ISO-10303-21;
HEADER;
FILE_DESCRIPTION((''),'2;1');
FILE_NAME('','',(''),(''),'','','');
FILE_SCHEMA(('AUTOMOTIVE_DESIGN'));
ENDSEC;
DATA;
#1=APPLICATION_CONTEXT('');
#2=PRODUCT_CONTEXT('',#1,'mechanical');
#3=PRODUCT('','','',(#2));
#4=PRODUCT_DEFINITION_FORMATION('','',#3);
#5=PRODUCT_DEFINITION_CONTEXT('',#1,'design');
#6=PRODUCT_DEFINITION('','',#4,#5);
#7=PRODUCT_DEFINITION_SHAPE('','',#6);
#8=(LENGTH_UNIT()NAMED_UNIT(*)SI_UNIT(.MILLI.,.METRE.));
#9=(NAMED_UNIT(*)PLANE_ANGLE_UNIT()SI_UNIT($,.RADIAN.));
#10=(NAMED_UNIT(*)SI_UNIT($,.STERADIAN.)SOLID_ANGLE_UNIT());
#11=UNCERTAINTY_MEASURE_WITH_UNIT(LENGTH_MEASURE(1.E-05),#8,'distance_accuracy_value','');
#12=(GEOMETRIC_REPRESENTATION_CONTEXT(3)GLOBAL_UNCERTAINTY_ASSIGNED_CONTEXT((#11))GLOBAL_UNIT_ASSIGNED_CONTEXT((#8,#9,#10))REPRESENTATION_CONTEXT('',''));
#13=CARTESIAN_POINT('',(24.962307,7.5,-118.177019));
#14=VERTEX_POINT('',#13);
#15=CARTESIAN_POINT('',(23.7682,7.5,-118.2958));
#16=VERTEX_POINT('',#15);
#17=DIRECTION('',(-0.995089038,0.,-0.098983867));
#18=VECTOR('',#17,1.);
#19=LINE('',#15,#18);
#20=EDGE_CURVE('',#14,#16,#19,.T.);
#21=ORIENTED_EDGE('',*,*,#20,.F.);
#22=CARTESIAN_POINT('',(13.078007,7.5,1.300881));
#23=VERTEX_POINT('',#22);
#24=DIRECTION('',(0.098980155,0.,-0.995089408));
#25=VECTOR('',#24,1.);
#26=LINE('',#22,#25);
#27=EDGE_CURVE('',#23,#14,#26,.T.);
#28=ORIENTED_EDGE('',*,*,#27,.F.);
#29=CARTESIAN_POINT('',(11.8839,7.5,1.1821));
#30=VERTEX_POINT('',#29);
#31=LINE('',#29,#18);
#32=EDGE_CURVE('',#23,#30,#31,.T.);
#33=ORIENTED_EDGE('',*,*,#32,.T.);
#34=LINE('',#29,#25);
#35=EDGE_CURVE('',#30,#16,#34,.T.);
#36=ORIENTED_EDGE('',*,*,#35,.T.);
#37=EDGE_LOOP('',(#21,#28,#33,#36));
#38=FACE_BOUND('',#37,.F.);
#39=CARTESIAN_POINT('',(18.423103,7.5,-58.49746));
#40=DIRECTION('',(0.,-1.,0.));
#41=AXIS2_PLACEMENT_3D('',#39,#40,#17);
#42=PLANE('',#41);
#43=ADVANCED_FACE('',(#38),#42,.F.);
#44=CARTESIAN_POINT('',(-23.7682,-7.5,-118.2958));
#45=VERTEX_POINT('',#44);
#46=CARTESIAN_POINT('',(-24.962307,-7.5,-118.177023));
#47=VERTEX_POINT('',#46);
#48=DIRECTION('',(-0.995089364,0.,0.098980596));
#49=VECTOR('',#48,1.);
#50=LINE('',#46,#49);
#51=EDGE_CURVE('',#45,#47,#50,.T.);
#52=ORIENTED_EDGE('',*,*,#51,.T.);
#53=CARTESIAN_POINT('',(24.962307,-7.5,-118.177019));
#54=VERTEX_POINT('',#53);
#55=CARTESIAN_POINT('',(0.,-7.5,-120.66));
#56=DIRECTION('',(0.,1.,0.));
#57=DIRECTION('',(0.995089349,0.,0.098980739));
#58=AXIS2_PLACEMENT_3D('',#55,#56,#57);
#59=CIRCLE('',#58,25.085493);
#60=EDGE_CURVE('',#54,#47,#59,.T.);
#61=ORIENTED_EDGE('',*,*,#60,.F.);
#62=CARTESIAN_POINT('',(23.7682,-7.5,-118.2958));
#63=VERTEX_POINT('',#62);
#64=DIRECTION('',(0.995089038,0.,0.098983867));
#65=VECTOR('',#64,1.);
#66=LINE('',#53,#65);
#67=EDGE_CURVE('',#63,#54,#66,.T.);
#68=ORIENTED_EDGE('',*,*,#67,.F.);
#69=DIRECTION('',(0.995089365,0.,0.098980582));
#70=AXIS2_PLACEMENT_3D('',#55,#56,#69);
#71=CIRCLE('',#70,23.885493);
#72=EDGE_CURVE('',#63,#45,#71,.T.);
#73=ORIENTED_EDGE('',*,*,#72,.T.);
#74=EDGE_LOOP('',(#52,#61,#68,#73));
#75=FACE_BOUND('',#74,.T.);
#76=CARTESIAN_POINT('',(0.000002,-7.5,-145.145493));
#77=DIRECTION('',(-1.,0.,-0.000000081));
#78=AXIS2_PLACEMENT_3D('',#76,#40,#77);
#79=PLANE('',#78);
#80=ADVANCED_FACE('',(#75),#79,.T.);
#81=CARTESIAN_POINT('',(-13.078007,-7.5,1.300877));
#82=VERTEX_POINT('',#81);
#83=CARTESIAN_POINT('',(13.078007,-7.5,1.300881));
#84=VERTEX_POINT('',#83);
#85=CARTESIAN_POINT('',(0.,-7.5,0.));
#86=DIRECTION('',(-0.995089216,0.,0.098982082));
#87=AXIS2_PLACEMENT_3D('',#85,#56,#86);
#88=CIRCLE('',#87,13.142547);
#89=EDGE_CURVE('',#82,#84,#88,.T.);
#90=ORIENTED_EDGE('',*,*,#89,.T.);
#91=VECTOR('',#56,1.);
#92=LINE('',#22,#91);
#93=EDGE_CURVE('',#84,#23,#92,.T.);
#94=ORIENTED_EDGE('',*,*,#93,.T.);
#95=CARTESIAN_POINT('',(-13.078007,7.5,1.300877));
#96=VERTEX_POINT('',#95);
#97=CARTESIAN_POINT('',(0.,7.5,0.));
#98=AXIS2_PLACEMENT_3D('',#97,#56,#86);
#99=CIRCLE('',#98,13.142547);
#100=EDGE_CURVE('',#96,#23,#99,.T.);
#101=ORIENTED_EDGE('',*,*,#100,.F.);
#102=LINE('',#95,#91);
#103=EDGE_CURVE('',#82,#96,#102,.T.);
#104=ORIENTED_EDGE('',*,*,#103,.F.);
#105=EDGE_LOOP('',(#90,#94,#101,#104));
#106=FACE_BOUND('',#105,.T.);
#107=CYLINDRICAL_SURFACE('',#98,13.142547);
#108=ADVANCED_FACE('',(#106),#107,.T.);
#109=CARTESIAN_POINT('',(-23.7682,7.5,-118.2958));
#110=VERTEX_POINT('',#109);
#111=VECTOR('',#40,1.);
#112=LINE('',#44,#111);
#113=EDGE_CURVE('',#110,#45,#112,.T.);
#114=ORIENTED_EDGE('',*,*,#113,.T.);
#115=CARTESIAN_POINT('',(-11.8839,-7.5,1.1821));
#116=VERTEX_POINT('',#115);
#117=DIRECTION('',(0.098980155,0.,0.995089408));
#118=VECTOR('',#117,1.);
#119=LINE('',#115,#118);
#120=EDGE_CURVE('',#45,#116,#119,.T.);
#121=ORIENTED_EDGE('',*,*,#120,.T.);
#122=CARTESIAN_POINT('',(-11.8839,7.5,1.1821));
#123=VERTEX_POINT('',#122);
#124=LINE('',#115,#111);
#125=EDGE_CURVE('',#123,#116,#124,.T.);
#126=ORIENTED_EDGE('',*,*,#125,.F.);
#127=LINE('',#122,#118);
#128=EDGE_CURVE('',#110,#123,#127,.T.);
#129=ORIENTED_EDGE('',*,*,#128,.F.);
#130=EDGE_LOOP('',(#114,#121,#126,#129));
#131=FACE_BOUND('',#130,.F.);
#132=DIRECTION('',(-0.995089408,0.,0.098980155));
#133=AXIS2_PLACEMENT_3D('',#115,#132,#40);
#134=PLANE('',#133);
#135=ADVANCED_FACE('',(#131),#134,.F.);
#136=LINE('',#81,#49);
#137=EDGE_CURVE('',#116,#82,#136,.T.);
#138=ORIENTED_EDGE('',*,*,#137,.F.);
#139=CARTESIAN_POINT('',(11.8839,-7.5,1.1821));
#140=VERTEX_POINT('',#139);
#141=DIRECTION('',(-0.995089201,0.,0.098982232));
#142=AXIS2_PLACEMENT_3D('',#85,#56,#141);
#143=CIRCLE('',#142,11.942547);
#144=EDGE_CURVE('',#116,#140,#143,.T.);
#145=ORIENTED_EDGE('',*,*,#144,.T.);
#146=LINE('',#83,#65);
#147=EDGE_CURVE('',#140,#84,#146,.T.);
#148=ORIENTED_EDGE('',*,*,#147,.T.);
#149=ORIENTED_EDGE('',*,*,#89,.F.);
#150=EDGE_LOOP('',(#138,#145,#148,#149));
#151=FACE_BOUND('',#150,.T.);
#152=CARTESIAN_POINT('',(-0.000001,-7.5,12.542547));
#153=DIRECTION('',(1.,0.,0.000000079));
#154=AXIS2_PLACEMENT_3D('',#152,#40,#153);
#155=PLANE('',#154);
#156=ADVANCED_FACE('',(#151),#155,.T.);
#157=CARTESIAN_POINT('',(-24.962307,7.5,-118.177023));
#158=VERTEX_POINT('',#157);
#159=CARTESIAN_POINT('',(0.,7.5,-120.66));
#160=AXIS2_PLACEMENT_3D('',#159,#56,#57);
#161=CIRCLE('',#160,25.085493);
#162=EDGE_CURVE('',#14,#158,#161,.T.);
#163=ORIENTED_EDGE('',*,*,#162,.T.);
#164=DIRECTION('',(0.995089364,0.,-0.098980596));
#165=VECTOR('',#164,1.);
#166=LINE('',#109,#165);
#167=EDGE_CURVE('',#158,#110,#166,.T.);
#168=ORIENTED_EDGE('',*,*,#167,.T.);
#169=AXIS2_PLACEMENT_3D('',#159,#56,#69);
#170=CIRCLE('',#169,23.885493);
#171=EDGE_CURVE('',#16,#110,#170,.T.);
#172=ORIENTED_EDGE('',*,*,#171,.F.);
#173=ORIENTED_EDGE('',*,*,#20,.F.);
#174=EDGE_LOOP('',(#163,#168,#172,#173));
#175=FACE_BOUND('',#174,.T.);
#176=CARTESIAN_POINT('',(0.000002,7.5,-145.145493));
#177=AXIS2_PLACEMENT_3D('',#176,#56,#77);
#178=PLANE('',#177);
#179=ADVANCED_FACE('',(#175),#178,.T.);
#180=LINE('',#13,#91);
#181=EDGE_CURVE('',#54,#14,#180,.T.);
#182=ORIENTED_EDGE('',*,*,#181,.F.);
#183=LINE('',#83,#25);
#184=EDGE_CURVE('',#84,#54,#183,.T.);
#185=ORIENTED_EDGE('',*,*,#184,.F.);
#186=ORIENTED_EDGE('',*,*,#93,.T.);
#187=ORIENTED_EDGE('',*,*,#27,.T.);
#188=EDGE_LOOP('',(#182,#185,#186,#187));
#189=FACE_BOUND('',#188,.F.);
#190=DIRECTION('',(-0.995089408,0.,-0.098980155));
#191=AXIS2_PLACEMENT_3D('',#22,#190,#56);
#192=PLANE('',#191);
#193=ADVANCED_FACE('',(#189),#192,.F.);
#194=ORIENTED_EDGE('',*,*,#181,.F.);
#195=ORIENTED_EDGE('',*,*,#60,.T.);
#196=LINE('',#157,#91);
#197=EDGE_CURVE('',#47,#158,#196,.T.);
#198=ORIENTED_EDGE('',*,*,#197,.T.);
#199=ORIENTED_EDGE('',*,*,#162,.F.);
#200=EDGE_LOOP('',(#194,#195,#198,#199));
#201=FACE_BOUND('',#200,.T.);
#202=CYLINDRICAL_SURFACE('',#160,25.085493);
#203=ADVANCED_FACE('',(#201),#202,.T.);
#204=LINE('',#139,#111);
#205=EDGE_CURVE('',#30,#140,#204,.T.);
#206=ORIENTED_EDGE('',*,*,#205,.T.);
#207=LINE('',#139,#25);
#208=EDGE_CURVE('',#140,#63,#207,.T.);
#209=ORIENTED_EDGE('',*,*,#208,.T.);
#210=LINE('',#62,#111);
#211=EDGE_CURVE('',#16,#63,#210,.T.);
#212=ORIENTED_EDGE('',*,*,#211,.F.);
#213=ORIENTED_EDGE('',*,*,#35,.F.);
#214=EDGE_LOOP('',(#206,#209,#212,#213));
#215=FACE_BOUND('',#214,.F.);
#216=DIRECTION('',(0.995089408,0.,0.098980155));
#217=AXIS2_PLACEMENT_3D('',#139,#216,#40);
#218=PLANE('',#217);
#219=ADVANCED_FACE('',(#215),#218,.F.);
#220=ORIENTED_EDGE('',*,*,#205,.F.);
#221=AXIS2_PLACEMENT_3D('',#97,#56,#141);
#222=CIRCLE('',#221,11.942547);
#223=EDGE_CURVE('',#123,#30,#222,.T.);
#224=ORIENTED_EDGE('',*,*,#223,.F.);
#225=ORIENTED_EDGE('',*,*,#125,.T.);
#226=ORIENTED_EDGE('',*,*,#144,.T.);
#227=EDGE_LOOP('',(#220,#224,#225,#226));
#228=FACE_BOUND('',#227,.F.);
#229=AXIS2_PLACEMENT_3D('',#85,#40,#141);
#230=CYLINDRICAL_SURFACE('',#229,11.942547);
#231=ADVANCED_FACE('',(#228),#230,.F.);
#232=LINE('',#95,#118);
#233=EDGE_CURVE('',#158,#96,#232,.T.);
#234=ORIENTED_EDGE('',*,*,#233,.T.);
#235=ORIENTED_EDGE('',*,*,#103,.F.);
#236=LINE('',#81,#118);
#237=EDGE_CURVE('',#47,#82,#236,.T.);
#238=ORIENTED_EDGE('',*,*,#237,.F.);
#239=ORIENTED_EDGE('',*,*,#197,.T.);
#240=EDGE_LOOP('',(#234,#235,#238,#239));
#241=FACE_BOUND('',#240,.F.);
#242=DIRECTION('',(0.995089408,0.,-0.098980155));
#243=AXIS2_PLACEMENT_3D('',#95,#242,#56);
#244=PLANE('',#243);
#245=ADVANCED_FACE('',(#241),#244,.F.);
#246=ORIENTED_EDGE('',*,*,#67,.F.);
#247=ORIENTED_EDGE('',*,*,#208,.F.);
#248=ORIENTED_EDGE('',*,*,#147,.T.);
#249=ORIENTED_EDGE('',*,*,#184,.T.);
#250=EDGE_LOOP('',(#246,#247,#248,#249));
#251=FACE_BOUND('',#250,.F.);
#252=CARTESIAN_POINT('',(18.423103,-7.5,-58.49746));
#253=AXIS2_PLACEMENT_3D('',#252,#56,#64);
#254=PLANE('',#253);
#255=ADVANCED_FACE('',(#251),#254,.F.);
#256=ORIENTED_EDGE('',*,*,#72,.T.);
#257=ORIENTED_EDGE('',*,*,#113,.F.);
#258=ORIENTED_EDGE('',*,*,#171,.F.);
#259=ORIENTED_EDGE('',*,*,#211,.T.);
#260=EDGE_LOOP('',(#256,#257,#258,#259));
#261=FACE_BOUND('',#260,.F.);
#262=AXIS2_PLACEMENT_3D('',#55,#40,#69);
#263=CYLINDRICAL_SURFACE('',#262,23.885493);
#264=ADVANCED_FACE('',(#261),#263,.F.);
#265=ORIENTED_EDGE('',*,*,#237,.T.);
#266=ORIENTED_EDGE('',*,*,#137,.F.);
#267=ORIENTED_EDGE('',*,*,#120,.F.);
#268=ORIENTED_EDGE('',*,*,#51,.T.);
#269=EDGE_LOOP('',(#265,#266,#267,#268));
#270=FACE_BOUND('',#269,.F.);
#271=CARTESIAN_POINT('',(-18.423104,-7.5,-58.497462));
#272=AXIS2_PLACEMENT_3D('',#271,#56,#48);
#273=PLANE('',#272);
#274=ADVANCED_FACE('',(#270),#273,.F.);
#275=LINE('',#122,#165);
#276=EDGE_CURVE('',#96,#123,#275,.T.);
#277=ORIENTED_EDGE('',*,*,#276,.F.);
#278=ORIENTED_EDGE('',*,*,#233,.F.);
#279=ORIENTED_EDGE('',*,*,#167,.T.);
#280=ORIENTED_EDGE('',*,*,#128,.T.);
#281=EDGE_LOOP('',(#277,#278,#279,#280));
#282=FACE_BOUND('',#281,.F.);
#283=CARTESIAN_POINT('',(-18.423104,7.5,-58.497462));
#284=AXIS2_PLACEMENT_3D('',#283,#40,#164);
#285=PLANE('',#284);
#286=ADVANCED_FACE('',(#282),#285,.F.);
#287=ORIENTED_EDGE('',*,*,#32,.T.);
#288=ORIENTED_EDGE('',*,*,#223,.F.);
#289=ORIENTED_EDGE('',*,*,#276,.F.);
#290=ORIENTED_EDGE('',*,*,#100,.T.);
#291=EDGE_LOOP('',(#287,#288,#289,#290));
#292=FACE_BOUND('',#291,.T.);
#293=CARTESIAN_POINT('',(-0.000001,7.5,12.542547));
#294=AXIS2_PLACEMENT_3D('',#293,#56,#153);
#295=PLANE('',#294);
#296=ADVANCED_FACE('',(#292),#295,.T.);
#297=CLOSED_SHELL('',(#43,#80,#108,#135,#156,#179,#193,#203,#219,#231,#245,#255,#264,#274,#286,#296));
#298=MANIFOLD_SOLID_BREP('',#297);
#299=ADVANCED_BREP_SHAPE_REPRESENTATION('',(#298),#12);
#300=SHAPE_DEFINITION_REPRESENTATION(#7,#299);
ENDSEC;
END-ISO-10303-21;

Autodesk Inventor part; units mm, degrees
ref_plane "YZ Plane" through (0, 0, 0) normal (1, 0, 0) x (0, 1, 0)
ref_plane "XZ Plane" through (0, 0, 0) normal (0, 1, 0) x (-1, 0, 0)
sketch "Sketch1" plane through (0, 0, 0) normal (0, 1, 0) x (-1, 0, 0)
  arc A0 (11.8839, 1.1821) -> (-11.8839, 1.1821) centre (0, 0) ccw
  arc A1 (-23.7682, -118.2958) -> (23.7682, -118.2958) centre (0, -120.66) ccw
  line L0 (11.8839, 1.1821) -> (23.7682, -118.2958)
  line L1 (-11.8839, 1.1821) -> (-23.7682, -118.2958)
  dimension "d0" = 23.885
  dimension "d1" = 47.771
  dimension "d2" = 120.66
ref_plane "Work Plane1" through (-11.8839, 0, 1.1821) normal (-0.0989806, 0, -0.9950894) x (0, -1, 0)
sketch "Sketch2" plane through (-11.8839, 0, 1.1821) normal (-0.0989806, 0, -0.9950894) x (0, -1, 0)
  line L0 (-7.5, 1.2) -> (7.5, 1.2)
  line L1 (7.5, 1.2) -> (7.5, 0)
  line L2 (7.5, 0) -> (-7.5, 0)
  line L3 (-7.5, 0) -> (-7.5, 1.2)
  line L4 (-7.5, 1.2) -> (7.5, 0) construction
  line L5 (7.5, 1.2) -> (-7.5, 0) construction
  point P0 (0, -11.9425)
  point P1 (0, 0.6)
  point P2 (0, 0)
  point P3 (0, 0)
  dimension "d3" = 1.2
  dimension "d4" = 15
sweep "Sweep1" add profiles "Sketch2" path "Sketch1"
properties part number "2309HCMUTE-CDT23-BELT_S5M-355X71X15" material "Rubber"
